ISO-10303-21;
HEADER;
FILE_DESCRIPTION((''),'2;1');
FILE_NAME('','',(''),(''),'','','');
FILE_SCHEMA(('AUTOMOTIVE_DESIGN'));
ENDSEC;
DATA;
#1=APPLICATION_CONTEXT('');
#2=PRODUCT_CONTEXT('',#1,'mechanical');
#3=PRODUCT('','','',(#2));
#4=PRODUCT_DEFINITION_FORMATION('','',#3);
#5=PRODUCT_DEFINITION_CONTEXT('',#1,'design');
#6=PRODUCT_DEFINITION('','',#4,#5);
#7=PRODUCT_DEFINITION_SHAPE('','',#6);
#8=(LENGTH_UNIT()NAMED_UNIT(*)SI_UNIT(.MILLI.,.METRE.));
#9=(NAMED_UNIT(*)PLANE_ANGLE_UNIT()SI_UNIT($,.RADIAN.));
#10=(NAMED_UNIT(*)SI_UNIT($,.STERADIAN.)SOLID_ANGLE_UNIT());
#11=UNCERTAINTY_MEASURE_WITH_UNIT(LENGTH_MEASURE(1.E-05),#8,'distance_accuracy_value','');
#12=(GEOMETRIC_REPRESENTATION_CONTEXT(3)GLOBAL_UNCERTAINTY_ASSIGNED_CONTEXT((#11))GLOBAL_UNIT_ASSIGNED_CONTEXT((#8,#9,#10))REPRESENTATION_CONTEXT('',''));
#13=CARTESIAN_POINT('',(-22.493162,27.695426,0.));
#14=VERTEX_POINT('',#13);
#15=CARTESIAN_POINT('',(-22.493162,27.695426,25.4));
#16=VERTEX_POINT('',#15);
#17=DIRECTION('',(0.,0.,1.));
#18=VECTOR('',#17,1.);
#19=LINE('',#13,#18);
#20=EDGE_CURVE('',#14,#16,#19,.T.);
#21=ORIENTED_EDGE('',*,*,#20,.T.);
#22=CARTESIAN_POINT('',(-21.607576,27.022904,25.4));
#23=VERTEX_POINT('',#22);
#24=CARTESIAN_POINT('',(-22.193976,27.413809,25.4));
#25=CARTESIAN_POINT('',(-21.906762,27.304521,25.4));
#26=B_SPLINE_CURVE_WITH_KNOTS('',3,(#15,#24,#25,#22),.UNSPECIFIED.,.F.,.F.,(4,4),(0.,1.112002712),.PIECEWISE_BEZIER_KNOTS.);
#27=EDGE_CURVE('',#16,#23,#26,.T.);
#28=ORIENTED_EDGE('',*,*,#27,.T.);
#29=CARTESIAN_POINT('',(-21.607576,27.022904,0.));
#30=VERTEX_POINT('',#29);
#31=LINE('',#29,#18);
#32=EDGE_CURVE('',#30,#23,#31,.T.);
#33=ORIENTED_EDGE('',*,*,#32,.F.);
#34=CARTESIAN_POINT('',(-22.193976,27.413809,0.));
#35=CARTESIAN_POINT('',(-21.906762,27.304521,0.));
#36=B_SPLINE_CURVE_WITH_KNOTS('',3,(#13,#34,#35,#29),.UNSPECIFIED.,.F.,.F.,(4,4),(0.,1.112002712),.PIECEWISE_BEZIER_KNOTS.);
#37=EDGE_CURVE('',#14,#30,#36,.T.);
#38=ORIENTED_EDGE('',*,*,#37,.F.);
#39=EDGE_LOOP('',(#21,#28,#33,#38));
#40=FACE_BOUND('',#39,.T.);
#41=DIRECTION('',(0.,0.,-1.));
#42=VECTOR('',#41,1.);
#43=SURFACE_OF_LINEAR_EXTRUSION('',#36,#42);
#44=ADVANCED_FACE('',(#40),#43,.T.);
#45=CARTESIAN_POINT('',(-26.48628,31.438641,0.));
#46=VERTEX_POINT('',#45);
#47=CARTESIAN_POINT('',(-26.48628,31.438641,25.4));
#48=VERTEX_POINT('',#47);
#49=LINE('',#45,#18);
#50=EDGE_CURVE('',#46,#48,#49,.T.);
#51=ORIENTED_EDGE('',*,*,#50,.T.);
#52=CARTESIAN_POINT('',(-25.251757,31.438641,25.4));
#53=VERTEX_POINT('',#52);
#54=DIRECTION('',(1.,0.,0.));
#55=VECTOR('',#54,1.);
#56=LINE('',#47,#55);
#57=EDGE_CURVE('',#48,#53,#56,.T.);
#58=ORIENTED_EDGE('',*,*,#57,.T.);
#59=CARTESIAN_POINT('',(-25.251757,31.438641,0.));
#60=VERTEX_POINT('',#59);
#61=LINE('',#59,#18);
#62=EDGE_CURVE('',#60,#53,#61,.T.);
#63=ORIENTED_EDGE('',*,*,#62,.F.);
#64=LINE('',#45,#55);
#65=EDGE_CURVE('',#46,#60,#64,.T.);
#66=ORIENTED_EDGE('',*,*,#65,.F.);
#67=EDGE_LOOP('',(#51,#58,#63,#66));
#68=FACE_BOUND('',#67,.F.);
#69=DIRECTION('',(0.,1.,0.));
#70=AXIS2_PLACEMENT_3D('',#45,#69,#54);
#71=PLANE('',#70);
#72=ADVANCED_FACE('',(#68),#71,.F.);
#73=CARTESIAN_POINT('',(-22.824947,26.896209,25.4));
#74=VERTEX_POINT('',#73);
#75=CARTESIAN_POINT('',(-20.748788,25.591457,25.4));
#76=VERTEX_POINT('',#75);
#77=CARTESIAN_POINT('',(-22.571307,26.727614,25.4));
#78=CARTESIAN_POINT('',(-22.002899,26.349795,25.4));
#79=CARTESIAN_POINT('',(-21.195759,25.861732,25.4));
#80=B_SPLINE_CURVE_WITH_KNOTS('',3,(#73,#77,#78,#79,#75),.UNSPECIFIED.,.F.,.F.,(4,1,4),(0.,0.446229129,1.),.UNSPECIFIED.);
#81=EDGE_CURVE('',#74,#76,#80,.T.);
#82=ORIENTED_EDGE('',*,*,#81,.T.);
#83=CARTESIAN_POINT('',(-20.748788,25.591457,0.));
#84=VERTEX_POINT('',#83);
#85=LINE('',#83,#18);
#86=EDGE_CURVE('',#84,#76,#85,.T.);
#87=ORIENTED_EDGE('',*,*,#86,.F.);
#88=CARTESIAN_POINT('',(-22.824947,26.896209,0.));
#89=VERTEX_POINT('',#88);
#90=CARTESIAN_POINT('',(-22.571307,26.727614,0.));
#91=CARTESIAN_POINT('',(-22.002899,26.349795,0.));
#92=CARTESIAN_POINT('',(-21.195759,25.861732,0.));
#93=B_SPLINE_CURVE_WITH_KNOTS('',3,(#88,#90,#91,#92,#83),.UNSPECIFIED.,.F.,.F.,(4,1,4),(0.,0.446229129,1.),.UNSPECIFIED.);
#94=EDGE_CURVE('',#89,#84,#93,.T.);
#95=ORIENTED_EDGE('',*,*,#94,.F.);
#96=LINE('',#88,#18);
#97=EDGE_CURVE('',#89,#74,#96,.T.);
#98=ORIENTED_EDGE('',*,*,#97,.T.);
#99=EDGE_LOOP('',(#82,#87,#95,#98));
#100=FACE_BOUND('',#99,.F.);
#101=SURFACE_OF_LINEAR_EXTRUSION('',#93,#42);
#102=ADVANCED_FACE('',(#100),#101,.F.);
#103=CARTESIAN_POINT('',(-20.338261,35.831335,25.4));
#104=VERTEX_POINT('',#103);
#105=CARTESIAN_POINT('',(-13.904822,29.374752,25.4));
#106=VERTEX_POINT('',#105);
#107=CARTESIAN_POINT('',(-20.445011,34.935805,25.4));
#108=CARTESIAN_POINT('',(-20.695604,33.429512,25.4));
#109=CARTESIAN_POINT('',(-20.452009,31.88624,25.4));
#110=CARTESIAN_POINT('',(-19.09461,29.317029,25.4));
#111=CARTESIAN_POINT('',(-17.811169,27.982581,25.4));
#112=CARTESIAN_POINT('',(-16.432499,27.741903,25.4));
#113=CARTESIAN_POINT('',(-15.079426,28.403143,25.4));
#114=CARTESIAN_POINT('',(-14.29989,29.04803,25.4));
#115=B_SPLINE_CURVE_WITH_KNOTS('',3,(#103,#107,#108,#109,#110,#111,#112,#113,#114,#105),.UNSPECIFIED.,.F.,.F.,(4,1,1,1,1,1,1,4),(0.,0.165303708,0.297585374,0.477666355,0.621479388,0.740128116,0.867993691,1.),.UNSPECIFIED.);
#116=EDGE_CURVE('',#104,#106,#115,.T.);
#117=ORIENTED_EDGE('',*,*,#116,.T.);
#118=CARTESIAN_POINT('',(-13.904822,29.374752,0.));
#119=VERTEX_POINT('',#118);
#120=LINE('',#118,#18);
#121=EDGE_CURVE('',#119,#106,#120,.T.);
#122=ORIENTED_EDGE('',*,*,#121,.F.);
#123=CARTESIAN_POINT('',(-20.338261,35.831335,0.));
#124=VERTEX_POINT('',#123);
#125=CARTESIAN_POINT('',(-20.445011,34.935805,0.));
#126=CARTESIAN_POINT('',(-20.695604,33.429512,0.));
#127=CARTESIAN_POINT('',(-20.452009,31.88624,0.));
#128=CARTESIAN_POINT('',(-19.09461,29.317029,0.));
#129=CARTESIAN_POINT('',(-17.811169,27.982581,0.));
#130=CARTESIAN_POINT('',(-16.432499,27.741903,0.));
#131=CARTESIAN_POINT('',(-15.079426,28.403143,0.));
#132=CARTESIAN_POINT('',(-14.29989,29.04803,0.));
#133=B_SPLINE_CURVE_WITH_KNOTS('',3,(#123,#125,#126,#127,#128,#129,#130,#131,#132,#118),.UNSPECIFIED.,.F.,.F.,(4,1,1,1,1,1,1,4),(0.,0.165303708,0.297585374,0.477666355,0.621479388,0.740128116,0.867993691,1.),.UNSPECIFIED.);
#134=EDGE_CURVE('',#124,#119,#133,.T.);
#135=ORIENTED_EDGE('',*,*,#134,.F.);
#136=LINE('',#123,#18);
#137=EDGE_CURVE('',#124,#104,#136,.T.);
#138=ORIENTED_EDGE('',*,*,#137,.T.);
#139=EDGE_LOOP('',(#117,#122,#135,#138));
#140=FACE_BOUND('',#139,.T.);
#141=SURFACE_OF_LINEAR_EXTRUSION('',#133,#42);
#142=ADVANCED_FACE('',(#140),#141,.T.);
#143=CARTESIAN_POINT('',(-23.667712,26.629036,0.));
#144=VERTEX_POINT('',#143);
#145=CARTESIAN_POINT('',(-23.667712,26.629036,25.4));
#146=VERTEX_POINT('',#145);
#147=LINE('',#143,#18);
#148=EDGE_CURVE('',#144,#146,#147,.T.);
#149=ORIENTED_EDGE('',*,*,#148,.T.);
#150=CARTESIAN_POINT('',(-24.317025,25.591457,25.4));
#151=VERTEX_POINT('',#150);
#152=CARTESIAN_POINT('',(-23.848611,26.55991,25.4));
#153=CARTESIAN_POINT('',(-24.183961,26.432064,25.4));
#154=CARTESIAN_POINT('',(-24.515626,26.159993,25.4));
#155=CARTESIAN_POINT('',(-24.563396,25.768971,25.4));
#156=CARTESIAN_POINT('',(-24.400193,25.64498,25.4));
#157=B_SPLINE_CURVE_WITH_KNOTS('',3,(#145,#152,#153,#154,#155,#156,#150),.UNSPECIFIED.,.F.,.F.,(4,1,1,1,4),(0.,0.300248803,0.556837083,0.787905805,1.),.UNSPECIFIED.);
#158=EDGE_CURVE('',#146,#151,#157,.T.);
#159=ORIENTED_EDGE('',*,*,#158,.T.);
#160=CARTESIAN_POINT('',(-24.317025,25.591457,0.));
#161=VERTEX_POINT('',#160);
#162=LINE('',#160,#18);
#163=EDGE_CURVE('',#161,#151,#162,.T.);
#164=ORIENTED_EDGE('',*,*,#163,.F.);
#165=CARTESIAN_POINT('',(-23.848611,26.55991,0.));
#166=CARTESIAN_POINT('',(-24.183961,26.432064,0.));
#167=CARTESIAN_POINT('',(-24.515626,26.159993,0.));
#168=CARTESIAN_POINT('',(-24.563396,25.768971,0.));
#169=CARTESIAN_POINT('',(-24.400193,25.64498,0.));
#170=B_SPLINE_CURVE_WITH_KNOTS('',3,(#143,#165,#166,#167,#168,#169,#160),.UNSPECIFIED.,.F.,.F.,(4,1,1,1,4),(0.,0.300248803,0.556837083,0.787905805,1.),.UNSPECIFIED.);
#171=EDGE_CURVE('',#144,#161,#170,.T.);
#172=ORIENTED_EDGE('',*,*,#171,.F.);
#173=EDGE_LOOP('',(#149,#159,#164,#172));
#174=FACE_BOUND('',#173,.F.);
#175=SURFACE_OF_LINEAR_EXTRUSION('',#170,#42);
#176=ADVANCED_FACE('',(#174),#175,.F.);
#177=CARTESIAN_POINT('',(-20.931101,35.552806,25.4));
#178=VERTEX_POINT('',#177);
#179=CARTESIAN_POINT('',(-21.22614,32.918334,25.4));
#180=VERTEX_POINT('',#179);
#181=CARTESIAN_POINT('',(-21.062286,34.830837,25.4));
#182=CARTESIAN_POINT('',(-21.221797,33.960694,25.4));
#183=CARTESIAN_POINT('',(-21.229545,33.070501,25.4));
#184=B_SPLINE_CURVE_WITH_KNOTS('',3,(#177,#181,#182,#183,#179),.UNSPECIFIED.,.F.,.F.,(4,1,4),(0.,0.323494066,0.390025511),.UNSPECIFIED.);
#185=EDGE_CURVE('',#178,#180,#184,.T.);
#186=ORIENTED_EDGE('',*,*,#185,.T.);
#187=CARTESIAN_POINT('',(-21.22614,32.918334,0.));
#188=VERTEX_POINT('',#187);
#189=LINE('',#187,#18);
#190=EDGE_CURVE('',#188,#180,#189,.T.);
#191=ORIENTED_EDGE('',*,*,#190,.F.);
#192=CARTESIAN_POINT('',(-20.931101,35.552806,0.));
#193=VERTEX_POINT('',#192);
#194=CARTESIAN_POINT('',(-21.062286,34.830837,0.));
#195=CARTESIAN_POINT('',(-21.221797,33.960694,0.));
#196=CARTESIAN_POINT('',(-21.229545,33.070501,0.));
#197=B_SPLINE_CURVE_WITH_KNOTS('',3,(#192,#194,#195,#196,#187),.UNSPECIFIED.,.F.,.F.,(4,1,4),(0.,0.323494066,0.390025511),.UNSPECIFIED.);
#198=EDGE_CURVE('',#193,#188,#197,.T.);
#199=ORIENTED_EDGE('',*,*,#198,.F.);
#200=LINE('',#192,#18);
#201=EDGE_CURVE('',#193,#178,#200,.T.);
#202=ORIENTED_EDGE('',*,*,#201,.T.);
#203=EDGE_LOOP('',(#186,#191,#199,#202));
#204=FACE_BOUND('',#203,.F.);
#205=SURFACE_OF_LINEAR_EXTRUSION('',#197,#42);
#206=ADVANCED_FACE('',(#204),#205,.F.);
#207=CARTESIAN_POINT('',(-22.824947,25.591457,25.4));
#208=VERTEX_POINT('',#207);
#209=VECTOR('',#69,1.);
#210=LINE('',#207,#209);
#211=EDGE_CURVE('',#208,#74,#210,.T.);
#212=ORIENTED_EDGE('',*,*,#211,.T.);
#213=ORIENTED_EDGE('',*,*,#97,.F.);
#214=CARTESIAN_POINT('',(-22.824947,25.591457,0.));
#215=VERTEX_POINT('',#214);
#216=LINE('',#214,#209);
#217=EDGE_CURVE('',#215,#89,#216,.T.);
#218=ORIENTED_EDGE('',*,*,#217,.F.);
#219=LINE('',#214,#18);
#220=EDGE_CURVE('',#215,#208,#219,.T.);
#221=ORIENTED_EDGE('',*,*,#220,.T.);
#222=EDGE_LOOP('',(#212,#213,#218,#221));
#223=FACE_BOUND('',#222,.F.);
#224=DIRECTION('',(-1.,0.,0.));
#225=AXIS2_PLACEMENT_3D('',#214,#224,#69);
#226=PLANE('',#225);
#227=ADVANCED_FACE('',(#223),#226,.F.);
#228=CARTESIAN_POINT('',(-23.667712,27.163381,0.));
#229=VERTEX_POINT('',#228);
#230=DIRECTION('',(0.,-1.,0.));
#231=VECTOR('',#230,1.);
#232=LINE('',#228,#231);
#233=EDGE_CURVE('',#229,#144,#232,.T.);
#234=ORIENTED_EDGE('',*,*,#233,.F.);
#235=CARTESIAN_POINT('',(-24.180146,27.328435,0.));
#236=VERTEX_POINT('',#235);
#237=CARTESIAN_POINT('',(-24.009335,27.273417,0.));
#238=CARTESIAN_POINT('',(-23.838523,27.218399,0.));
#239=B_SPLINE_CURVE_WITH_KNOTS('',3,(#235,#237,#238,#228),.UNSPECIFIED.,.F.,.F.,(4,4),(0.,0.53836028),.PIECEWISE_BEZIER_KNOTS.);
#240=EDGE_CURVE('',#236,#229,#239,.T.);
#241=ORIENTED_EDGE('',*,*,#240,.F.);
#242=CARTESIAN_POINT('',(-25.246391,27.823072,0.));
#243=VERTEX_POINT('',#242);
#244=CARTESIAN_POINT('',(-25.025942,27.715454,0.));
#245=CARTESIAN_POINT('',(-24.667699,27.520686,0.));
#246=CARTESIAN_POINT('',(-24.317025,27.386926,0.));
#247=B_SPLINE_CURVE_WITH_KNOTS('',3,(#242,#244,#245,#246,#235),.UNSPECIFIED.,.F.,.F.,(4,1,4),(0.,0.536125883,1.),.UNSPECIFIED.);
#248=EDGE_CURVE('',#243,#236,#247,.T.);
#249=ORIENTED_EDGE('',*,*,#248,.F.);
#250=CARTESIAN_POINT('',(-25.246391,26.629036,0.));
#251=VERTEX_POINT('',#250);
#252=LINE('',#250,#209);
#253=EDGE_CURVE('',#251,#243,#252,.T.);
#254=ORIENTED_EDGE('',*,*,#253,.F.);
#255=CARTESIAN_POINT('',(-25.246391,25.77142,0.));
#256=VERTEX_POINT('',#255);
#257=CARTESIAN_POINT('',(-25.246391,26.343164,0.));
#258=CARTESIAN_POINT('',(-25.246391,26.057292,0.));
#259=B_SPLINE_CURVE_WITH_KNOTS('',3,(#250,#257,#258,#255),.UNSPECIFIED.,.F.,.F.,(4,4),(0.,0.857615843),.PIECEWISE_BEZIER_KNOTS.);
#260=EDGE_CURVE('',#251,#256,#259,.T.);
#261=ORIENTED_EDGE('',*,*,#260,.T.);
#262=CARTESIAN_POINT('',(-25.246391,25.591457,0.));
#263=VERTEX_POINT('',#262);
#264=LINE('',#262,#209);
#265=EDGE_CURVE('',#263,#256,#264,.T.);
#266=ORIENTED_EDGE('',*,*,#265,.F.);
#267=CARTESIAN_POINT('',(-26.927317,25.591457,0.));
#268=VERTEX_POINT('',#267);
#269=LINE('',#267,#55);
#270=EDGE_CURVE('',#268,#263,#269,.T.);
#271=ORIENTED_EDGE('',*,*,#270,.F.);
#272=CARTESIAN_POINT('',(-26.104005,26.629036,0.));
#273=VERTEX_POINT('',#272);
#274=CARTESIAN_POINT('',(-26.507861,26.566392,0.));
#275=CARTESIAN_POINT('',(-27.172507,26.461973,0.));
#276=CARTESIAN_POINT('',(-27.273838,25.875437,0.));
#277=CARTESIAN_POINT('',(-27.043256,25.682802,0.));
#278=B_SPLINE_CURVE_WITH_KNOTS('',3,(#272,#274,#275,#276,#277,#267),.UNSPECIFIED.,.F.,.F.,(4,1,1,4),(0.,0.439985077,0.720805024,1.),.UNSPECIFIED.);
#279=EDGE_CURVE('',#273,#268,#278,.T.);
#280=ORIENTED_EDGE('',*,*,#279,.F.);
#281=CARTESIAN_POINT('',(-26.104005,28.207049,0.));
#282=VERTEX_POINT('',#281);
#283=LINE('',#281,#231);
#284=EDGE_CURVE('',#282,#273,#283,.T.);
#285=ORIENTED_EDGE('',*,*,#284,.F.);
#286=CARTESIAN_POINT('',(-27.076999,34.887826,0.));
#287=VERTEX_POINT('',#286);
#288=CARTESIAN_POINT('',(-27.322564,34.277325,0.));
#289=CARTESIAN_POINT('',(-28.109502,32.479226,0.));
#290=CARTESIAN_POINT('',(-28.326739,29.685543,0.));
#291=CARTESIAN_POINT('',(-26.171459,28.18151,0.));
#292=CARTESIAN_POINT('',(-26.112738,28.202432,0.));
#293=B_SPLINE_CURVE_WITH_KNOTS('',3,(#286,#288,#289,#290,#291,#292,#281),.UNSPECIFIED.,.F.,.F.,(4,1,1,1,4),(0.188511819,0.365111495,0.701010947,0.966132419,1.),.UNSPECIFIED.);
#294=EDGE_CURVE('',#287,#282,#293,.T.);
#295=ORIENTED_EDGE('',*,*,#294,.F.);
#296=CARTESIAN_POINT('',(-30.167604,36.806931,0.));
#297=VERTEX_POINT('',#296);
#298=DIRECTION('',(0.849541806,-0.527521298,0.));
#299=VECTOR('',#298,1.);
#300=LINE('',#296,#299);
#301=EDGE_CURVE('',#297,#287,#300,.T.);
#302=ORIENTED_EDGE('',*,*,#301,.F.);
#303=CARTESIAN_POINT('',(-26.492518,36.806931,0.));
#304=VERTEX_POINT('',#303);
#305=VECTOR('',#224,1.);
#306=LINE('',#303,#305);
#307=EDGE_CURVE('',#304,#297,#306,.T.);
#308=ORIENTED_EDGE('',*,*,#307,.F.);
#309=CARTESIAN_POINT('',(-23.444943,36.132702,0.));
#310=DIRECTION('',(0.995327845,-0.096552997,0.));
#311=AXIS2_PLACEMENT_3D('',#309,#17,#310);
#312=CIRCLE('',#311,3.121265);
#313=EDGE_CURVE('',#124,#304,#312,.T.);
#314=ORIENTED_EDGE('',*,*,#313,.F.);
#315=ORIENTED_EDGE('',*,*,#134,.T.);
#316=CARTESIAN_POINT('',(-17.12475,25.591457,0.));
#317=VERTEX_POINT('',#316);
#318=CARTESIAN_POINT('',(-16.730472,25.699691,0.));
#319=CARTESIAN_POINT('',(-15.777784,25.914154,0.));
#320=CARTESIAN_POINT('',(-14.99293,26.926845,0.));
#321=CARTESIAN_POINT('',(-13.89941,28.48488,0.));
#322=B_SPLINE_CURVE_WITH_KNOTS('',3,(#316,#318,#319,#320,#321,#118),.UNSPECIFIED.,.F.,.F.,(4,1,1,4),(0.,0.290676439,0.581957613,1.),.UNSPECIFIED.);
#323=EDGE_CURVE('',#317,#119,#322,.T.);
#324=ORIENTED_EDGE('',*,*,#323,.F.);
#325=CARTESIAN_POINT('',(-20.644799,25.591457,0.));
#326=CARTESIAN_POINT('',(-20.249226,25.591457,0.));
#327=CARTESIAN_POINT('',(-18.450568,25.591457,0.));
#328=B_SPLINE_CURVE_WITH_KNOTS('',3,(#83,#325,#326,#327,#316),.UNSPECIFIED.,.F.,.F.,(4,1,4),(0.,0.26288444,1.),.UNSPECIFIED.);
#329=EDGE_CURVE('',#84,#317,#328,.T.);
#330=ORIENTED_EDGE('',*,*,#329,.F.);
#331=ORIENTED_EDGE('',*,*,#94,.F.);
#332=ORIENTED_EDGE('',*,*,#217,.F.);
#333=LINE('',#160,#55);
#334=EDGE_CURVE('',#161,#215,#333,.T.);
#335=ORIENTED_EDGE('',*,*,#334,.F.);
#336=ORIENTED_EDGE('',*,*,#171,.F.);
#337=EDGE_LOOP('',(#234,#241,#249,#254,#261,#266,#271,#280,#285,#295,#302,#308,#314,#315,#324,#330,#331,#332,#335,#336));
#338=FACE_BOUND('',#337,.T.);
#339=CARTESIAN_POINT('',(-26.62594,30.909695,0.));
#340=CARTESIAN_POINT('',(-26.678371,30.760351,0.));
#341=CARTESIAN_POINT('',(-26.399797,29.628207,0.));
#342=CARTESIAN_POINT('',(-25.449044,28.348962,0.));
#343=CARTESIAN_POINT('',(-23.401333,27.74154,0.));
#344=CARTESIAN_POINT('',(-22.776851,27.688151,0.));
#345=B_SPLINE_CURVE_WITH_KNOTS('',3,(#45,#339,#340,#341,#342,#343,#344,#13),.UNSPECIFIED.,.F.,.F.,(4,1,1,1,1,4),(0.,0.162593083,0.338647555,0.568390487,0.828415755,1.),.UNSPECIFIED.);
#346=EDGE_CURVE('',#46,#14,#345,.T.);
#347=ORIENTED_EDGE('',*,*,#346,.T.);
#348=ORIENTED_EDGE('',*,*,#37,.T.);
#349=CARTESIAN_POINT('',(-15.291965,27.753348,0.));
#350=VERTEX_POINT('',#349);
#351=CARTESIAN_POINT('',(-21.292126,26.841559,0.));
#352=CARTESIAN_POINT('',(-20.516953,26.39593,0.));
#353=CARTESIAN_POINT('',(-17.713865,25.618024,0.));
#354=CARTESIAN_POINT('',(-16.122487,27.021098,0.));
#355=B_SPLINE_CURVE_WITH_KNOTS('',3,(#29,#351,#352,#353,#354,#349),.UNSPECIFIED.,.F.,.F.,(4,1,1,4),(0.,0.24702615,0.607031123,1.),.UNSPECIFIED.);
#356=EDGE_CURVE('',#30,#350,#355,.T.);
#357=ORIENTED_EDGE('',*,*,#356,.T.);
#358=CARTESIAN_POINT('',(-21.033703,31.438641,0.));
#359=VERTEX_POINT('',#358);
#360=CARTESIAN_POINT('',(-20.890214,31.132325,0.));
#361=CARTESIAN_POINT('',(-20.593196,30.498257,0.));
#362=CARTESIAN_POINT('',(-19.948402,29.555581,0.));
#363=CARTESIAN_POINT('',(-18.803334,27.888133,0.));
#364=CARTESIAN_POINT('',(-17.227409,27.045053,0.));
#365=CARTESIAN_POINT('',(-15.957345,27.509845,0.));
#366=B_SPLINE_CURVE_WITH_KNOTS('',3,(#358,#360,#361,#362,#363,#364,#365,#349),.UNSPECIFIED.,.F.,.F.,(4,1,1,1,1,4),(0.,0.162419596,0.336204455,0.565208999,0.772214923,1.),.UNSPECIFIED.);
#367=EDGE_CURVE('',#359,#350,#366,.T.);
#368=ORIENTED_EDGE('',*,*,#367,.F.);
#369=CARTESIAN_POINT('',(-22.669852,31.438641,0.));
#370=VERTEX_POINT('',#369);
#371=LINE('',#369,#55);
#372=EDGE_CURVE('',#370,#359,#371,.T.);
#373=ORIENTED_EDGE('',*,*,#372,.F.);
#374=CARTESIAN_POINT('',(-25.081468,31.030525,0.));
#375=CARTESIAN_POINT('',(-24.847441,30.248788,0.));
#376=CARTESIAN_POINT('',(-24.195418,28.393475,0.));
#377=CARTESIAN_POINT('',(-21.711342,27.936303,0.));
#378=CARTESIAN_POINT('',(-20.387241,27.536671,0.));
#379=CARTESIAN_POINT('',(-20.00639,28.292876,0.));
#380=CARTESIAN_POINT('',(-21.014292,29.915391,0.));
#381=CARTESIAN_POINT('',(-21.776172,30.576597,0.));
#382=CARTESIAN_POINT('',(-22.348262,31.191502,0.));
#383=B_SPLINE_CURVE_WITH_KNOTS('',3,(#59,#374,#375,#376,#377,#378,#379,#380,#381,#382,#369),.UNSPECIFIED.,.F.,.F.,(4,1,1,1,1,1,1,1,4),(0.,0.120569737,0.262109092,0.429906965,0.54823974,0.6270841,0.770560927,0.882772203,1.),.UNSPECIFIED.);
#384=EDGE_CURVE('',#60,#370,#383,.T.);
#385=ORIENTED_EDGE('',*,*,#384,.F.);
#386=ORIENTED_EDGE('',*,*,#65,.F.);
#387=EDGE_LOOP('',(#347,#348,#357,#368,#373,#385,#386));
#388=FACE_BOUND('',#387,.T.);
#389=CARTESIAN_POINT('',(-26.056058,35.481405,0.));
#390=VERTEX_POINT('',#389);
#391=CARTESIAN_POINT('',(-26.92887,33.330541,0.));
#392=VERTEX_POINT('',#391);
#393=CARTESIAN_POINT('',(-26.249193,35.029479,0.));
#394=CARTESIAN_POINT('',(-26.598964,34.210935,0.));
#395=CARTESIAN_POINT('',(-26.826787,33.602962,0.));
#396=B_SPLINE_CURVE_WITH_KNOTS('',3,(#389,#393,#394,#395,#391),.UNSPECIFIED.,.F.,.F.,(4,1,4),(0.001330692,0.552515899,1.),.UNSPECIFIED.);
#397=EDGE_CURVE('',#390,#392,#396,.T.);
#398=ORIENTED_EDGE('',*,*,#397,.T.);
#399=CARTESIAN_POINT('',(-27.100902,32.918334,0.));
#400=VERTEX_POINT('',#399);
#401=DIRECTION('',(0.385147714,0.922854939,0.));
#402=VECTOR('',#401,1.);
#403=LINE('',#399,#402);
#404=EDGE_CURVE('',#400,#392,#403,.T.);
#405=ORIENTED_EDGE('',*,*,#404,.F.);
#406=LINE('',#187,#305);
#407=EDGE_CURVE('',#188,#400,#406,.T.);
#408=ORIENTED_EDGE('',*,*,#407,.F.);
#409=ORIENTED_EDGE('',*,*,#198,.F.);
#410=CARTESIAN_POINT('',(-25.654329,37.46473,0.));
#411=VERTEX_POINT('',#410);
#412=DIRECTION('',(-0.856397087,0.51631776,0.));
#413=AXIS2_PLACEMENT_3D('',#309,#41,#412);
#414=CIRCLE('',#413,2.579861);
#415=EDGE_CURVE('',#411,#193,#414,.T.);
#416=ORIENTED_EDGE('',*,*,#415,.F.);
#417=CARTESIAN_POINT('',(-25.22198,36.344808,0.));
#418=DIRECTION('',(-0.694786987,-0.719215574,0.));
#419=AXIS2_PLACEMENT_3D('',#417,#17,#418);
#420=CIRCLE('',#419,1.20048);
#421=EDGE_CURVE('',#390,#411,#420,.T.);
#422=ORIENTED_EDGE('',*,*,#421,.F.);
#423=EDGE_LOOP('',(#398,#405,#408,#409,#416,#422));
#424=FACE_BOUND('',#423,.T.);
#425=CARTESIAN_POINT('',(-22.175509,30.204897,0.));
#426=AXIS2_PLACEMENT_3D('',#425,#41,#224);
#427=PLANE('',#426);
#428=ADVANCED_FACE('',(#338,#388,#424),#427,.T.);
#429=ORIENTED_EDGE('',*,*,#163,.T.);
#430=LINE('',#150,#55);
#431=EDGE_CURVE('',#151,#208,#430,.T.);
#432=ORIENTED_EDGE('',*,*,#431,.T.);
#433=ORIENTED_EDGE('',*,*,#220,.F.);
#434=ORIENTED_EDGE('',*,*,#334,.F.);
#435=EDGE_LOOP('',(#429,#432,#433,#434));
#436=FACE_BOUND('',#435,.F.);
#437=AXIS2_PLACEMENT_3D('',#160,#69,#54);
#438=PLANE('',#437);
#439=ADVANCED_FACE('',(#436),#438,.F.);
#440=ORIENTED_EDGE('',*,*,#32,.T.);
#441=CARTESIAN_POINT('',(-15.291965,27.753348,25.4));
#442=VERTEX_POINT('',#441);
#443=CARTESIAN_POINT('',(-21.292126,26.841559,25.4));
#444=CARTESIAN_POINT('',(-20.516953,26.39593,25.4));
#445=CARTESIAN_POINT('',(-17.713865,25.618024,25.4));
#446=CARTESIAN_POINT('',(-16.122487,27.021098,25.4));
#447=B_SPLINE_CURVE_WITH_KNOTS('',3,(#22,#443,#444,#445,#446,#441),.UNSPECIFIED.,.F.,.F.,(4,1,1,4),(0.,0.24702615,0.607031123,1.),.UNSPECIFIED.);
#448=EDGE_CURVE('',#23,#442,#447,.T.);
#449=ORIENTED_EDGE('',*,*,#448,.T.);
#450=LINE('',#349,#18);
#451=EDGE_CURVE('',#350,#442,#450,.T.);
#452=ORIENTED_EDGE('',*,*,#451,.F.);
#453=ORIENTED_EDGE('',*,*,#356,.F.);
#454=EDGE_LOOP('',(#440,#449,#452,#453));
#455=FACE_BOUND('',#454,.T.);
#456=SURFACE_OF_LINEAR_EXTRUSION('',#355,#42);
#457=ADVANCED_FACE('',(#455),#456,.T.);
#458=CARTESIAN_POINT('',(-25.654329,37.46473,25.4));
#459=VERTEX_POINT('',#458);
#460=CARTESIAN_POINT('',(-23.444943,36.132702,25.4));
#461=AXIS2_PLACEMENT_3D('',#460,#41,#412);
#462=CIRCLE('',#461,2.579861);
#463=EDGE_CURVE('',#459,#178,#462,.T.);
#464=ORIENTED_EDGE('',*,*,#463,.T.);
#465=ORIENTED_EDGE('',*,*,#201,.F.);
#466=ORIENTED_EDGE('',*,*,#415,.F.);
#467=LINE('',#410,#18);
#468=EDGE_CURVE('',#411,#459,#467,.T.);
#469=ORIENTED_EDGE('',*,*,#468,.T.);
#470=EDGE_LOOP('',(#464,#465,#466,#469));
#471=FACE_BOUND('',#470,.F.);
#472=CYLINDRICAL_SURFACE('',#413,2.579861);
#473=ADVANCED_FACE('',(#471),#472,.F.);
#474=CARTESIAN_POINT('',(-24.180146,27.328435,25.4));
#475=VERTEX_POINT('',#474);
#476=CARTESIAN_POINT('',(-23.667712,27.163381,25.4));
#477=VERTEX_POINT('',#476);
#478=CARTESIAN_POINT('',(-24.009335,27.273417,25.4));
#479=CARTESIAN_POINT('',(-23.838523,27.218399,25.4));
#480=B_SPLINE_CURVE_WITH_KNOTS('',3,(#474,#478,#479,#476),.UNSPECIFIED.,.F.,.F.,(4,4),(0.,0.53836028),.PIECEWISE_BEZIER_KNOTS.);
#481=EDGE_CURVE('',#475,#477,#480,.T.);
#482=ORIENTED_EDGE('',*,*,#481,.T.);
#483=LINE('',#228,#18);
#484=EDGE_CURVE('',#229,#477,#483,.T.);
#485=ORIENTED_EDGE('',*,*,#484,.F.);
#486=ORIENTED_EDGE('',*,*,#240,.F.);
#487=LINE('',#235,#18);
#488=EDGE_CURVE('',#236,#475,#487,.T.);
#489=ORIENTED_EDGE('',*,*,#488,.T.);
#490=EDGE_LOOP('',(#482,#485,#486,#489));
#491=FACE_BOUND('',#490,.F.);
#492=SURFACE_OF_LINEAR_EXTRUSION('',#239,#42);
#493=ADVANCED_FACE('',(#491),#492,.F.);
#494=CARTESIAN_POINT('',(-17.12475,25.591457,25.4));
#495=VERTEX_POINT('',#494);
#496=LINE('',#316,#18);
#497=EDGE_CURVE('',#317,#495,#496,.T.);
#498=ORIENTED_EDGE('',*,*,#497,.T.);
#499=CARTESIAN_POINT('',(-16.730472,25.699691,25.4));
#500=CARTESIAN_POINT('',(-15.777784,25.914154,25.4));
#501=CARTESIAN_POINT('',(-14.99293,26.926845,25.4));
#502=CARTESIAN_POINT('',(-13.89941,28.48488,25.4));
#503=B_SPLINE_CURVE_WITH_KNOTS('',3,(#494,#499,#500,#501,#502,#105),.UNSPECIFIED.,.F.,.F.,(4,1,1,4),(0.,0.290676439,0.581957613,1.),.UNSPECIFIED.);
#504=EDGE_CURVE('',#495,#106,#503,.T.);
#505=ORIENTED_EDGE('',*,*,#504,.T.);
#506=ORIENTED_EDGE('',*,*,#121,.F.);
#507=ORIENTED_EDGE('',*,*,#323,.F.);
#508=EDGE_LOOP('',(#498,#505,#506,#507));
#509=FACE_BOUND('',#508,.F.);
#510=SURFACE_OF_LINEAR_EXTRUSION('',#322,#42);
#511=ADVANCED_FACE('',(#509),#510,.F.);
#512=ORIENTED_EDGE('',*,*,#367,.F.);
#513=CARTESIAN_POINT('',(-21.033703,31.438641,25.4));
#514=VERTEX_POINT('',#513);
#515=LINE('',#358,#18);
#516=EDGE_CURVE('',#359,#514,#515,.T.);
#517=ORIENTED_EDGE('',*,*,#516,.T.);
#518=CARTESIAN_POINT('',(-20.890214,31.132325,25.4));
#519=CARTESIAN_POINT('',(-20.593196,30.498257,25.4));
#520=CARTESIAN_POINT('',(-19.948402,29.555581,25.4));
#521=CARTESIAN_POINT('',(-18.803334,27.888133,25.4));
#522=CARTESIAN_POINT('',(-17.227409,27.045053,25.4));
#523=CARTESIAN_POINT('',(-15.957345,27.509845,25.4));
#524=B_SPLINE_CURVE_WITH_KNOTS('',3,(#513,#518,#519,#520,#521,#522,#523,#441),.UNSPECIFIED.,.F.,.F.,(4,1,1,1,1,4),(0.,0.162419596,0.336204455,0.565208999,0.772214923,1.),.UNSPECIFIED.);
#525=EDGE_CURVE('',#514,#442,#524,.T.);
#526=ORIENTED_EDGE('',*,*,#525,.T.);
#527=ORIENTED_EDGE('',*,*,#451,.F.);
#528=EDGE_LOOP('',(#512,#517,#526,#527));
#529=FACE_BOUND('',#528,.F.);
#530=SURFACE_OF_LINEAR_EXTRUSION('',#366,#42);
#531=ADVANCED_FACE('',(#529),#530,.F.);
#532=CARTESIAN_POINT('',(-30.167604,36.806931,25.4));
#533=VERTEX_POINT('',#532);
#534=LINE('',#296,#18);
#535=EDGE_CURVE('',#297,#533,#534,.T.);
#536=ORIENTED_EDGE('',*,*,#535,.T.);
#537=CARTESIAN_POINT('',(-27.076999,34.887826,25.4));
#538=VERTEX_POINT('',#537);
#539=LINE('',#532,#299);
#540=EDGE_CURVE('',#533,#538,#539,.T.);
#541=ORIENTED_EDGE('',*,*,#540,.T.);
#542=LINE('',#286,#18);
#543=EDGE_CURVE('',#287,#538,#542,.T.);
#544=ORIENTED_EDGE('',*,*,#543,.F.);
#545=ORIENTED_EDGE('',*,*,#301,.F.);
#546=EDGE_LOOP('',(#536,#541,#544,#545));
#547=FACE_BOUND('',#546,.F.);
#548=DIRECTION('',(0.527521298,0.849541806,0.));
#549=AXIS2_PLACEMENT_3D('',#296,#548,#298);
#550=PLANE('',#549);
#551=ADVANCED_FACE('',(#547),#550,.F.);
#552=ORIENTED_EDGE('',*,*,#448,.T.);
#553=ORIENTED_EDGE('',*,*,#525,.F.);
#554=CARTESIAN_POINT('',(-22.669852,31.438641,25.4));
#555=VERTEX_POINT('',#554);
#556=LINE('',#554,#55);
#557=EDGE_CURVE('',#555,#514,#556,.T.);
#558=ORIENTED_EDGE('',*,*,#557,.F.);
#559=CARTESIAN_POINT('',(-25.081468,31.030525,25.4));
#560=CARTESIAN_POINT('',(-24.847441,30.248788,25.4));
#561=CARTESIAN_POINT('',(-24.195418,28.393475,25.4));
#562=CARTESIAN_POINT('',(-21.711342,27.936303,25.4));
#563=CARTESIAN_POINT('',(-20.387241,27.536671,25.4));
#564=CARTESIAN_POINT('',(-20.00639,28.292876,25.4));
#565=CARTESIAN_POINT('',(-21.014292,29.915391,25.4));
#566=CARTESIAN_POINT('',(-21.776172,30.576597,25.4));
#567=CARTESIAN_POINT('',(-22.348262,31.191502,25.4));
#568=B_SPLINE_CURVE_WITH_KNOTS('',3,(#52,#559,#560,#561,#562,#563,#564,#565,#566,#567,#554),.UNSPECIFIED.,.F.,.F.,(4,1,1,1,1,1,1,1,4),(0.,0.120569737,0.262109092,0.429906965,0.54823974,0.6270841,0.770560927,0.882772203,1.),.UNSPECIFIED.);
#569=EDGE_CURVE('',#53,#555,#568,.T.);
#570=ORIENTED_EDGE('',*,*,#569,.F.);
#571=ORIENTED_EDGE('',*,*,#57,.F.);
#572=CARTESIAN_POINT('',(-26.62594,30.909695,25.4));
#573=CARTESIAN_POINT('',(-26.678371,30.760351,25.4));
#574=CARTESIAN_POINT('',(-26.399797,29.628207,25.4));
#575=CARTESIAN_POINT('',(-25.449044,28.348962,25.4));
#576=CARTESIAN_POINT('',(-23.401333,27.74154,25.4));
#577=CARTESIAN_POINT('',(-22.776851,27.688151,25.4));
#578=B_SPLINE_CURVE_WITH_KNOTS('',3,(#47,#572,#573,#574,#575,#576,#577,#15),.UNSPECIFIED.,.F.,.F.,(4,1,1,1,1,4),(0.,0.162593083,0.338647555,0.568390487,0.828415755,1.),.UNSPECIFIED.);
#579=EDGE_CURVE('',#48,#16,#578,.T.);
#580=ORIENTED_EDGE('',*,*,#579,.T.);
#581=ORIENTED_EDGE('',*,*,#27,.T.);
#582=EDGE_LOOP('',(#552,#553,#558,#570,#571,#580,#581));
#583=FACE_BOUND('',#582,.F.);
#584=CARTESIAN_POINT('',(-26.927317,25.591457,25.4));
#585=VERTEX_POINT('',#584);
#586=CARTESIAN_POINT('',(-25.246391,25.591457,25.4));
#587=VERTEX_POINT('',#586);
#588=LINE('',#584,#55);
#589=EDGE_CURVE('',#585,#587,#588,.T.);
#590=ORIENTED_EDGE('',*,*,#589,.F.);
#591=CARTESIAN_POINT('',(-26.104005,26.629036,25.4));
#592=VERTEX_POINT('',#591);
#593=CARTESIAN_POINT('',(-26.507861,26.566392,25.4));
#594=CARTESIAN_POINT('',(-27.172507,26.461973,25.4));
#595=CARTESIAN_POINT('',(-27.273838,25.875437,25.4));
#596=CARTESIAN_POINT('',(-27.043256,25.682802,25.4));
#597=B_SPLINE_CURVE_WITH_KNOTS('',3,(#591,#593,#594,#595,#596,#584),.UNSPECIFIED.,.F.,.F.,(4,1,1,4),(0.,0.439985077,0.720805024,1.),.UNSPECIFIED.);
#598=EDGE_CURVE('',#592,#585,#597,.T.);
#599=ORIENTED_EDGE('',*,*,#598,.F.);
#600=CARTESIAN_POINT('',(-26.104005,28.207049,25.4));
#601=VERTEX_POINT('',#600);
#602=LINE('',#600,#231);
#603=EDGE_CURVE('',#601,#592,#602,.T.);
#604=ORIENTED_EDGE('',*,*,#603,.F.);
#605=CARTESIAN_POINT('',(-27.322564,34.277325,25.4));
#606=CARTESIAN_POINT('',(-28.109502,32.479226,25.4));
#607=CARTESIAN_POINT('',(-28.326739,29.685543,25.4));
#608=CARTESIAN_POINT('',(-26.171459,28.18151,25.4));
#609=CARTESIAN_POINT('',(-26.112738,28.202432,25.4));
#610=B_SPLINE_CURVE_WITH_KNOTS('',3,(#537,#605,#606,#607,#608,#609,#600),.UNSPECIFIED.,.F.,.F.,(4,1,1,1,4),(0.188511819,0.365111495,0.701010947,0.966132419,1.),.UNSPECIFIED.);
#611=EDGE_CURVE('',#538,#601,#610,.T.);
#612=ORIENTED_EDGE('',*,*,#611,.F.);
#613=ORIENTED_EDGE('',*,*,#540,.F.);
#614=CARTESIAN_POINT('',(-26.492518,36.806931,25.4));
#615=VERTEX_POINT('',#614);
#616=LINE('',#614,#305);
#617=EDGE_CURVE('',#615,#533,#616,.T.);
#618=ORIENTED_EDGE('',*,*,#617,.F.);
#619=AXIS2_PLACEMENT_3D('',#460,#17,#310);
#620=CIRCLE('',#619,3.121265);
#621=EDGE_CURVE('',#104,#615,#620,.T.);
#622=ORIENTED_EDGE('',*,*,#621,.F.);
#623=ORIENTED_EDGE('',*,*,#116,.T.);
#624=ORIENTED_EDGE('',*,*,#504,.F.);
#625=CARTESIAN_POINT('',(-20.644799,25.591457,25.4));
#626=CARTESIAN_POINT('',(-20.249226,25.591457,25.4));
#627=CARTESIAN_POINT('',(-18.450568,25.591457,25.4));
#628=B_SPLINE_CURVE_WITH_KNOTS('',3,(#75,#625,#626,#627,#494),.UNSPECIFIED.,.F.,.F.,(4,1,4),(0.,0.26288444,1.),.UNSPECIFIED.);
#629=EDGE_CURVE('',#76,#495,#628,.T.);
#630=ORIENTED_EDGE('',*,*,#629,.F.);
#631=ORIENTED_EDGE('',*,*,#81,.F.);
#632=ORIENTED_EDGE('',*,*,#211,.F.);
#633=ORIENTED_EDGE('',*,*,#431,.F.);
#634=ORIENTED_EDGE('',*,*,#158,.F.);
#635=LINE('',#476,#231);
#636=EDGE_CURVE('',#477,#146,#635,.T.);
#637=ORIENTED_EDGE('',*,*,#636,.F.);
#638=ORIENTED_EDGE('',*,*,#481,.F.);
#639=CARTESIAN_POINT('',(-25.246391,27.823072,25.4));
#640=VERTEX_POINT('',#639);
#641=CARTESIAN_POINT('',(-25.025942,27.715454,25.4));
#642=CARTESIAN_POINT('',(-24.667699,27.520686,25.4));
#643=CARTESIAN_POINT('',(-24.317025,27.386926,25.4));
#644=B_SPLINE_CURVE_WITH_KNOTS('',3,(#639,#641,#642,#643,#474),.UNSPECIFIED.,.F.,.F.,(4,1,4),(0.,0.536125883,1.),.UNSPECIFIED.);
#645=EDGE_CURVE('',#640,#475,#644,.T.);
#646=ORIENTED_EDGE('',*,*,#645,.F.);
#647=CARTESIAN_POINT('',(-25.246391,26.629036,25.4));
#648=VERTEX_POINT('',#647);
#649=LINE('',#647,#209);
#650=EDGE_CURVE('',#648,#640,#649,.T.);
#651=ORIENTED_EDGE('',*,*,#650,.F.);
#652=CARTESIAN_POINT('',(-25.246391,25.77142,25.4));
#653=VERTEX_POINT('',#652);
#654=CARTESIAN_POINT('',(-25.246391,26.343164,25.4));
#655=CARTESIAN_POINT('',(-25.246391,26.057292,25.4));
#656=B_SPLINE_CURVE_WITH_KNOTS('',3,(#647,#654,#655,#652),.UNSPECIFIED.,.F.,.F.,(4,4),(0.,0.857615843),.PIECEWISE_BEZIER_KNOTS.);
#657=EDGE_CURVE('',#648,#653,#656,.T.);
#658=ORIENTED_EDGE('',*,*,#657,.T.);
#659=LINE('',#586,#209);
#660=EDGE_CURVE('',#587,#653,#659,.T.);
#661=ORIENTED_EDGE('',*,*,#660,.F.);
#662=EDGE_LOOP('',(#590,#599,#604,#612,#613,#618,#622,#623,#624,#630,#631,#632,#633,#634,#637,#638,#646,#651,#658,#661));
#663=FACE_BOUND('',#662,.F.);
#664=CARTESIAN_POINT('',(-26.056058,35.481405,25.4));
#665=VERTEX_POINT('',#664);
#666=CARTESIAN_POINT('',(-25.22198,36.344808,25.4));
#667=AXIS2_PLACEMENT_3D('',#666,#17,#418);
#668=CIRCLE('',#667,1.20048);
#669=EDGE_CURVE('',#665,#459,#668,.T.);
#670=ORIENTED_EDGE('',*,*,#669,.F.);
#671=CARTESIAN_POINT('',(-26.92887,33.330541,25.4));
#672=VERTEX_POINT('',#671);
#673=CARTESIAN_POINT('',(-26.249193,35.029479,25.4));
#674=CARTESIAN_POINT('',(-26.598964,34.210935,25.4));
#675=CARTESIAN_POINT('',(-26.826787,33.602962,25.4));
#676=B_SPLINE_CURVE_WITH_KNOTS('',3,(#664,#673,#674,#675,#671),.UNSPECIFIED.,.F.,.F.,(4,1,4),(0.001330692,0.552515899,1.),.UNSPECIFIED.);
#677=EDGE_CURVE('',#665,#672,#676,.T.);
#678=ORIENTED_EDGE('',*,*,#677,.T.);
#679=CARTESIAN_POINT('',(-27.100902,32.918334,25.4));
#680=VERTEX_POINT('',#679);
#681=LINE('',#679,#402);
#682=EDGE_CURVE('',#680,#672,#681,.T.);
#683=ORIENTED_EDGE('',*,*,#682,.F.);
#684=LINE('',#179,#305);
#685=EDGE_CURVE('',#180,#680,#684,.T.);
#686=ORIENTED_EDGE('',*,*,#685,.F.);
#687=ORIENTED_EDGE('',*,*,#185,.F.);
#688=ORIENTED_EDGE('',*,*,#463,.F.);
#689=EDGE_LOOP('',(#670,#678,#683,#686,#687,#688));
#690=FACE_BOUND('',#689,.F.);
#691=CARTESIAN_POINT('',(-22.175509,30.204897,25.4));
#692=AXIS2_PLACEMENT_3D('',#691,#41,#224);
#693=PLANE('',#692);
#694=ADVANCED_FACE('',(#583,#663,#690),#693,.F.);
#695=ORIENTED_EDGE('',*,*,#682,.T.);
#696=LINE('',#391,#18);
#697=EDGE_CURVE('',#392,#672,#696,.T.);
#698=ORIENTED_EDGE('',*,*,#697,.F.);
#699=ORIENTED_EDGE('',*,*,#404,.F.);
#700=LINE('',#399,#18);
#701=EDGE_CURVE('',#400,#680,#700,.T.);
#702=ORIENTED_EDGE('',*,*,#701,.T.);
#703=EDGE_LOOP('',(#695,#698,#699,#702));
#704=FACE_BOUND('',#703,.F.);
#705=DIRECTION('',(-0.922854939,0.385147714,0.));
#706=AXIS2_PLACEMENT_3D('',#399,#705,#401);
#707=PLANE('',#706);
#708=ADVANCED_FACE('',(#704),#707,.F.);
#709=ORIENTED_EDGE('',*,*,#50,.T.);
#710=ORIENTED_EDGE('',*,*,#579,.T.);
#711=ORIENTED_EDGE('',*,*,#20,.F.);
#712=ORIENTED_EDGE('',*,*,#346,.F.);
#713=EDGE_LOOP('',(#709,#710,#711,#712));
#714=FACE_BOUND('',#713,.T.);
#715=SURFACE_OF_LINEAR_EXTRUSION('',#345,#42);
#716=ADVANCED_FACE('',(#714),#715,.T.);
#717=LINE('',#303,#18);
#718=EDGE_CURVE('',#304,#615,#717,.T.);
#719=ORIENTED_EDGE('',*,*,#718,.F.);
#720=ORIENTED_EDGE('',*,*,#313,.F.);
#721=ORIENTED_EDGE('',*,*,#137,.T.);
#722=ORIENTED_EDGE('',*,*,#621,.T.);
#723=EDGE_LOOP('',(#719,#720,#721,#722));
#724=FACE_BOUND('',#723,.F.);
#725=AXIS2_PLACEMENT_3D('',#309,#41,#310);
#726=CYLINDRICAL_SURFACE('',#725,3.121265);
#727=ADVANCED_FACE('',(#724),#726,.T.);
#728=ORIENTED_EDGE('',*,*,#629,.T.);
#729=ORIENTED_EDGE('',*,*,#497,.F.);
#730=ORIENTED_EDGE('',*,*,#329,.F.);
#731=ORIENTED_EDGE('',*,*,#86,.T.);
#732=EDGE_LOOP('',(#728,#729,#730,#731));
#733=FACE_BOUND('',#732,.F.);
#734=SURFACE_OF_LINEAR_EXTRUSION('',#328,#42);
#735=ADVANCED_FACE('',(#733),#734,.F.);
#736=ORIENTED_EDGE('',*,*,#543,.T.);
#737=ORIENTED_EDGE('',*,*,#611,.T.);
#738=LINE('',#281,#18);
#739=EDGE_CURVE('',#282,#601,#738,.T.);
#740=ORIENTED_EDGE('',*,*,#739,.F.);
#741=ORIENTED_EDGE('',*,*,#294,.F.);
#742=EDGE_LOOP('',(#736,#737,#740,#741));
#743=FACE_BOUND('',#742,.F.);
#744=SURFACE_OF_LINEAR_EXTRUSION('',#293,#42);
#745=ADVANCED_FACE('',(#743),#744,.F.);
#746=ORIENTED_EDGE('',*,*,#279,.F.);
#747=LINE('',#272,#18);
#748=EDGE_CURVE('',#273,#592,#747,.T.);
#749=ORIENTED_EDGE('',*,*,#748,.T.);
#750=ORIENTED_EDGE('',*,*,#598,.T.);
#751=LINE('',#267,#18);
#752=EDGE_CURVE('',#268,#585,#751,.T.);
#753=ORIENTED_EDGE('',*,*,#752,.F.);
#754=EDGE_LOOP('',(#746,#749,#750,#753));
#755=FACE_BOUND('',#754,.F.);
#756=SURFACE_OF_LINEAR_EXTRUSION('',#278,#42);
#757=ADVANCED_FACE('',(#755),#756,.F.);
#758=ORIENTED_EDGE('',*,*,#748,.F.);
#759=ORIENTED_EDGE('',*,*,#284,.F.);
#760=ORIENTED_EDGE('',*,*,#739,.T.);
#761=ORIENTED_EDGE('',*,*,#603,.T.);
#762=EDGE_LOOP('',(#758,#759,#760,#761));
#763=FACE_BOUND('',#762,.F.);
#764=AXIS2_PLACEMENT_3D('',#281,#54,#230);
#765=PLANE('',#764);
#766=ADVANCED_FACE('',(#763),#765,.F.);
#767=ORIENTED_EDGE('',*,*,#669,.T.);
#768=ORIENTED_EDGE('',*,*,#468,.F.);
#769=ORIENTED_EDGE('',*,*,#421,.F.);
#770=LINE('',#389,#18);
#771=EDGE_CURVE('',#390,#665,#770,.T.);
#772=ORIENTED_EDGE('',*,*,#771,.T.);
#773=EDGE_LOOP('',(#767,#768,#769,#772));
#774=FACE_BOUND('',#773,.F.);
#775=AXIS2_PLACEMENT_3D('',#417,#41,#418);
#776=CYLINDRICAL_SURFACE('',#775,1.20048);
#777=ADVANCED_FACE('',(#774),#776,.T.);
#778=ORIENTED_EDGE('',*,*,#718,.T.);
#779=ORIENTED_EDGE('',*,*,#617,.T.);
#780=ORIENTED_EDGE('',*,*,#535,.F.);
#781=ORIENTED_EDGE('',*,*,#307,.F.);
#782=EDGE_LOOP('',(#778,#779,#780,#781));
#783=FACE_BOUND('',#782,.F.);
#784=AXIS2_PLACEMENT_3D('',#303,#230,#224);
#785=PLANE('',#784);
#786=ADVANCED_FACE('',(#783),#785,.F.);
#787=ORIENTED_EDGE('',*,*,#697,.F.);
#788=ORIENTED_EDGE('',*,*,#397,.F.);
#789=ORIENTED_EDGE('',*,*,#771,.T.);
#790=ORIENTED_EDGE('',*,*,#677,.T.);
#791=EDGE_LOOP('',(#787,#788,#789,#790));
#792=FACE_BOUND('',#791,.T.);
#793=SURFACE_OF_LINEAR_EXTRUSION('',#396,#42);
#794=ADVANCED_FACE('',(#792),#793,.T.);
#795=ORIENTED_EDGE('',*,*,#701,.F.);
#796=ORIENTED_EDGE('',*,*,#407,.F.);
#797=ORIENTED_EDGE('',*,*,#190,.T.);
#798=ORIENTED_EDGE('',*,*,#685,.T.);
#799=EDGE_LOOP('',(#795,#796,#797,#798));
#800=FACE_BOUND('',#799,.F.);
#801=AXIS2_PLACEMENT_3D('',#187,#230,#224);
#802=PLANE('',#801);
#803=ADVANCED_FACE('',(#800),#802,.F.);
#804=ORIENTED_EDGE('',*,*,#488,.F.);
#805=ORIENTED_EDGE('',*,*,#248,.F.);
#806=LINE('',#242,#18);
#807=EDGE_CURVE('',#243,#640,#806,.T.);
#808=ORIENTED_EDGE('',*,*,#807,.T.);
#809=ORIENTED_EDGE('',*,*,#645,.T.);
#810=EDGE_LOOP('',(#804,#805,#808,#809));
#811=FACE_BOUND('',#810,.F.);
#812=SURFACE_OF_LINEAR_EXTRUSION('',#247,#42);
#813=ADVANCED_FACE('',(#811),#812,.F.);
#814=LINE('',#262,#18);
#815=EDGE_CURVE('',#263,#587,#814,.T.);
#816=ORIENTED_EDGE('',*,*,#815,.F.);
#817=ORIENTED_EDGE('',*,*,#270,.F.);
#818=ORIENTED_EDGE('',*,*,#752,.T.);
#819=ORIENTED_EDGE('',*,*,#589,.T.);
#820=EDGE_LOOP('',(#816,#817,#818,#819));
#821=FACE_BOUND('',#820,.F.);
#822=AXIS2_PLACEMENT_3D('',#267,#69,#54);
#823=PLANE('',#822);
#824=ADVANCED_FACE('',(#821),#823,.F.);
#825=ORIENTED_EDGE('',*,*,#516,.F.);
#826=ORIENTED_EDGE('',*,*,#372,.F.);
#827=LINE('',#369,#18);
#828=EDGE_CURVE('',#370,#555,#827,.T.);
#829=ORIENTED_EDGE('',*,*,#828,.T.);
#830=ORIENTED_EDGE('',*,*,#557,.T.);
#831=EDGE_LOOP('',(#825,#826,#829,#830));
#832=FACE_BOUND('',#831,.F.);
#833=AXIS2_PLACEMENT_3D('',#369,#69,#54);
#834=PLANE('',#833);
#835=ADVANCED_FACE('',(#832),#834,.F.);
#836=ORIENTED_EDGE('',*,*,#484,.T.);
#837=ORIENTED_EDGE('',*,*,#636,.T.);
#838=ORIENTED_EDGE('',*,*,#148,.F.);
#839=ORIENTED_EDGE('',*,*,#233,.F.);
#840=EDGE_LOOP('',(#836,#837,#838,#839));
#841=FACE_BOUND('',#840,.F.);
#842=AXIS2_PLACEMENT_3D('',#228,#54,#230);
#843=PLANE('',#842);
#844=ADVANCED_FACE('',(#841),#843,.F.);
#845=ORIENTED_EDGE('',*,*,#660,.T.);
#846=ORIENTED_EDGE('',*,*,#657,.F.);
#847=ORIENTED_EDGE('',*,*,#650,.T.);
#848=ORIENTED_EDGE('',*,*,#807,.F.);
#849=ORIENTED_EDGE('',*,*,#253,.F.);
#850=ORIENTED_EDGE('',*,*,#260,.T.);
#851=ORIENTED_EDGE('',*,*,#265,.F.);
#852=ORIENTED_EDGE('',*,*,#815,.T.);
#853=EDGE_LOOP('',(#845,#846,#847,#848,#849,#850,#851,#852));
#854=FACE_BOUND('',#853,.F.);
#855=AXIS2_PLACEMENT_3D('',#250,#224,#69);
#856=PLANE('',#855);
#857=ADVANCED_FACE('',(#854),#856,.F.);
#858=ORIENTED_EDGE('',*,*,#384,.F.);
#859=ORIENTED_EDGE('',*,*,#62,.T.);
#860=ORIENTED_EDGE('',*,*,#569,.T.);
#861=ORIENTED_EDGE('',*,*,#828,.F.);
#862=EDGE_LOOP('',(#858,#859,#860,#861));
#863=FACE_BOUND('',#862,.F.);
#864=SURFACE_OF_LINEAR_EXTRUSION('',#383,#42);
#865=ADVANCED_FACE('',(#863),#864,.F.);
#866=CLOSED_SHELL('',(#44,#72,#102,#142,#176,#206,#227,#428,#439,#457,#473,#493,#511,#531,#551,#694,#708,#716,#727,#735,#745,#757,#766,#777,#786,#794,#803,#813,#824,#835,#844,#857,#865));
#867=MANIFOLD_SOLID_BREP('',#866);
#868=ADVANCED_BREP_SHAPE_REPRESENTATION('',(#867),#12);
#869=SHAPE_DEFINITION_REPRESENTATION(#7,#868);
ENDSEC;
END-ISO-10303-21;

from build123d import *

# Parameters (mm, degrees)
F1_DEPTH = 25.4


with BuildPart() as f1:
    # F0 (on Top) → F1 (new body)
    with BuildSketch(Plane.XY):
        with BuildLine():
            add(Edge.make_bspline(
                [(-20.3382612037, 35.8313347316), (-20.4450111683, 34.9358050979), (-20.6956038594, 33.4295119082), (-20.4520091655, 31.8862395133), (-19.0946101464, 29.3170291608), (-17.8111689332, 27.9825807986), (-16.4324991862, 27.7419027231), (-15.0794261509, 28.4031430479), (-14.2998902994, 29.0480302806), (-13.904822059, 29.3747521937)],
                knots=[0, 0, 0, 0, 0.1653037084, 0.2975853738, 0.4776663545, 0.6214793879, 0.7401281155, 0.8679936909, 1, 1, 1, 1], degree=3))
            ThreePointArc((-20.3382612037, 35.8313347316), (-22.9562506508, 39.2154729726), (-26.4925179517, 36.8069310992))
            Line((-26.4925179517, 36.8069310992), (-26.5022447151, 36.8069310992))
            add(Edge.make_bspline(
                [(-26.5022447151, 36.8069310992), (-26.5819130783, 36.1808218197), (-26.8148696335, 35.5395069688), (-27.0769987784, 34.8878260057)],
                knots=[0, 0, 0, 0, 0.1885118186, 0.1885118186, 0.1885118186, 0.1885118186], degree=3))
            add(Edge.make_bspline(
                [(-27.0769987784, 34.8878260057), (-27.3225638709, 34.2773250402), (-28.1095019562, 32.4792264142), (-28.326739249, 29.6855427651), (-26.1714588887, 28.1815095827), (-26.1127384914, 28.2024321762), (-26.1040050536, 28.2070487738)],
                knots=[0.1885118186, 0.1885118186, 0.1885118186, 0.1885118186, 0.365111495, 0.7010109468, 0.966132419, 1, 1, 1, 1], degree=3))
            Line((-26.1040050536, 28.2070487738), (-26.1040050536, 26.6290362924))
            add(Edge.make_bspline(
                [(-26.1040050536, 26.6290362924), (-26.50786087, 26.5663915047), (-27.1725068155, 26.4619725648), (-27.2738381155, 25.8754369894), (-27.0432563694, 25.6828019605), (-26.9273165613, 25.5914572626)],
                knots=[0, 0, 0, 0, 0.4399850766, 0.7208050242, 1, 1, 1, 1], degree=3))
            Line((-26.9273165613, 25.5914572626), (-25.2463910729, 25.5914572626))
            Line((-25.2463910729, 25.5914572626), (-25.2463910729, 25.771420449))
            add(Edge.make_bspline(
                [(-25.2463910729, 26.6290362924), (-25.2463910729, 26.3431643446), (-25.2463910729, 26.0572923968), (-25.2463910729, 25.771420449)],
                knots=[0, 0, 0, 0, 0.8576158434, 0.8576158434, 0.8576158434, 0.8576158434], degree=3))
            Line((-25.2463910729, 26.6290362924), (-25.2463910729, 27.8230719268))
            add(Edge.make_bspline(
                [(-25.2463910729, 27.8230719268), (-25.0259420337, 27.7154537877), (-24.6676994209, 27.5206856825), (-24.3170251754, 27.3869259749), (-24.1801459342, 27.3284353316)],
                knots=[0, 0, 0, 0, 0.5361258831, 1, 1, 1, 1], degree=3))
            add(Edge.make_bspline(
                [(-24.1801459342, 27.3284353316), (-24.0093345443, 27.27341714), (-23.8385231545, 27.2183989485), (-23.6677117646, 27.163380757)],
                knots=[0, 0, 0, 0, 0.5383602798, 0.5383602798, 0.5383602798, 0.5383602798], degree=3))
            Line((-23.6677117646, 27.163380757), (-23.6677117646, 26.6290362924))
            add(Edge.make_bspline(
                [(-23.6677117646, 26.6290362924), (-23.8486112672, 26.5599101731), (-24.1839606126, 26.4320640725), (-24.5156260038, 26.159992966), (-24.5633962408, 25.7689710346), (-24.4001932512, 25.6449799988), (-24.3170251754, 25.5914572626)],
                knots=[0, 0, 0, 0, 0.3002488033, 0.5568370832, 0.7879058054, 1, 1, 1, 1], degree=3))
            Line((-24.3170251754, 25.5914572626), (-22.8249467909, 25.5914572626))
            Line((-22.8249467909, 25.5914572626), (-22.8249467909, 26.6290362924))
            Line((-22.8249467909, 26.6290362924), (-22.8249467909, 26.8962085247))
            add(Edge.make_bspline(
                [(-22.8249467909, 26.8962085247), (-22.5713066122, 26.7276144339), (-22.0028986749, 26.3497948791), (-21.195758956, 25.8617321727), (-20.7487884909, 25.5914572626)],
                knots=[0, 0, 0, 0, 0.446229129, 1, 1, 1, 1], degree=3))
            add(Edge.make_bspline(
                [(-20.7487884909, 25.5914572626), (-20.6447985865, 25.5914572626), (-20.2492258993, 25.5914572626), (-18.450568256, 25.5914572626), (-17.1247497201, 25.5914572626)],
                knots=[0, 0, 0, 0, 0.26288444, 1, 1, 1, 1], degree=3))
            add(Edge.make_bspline(
                [(-17.1247497201, 25.5914572626), (-16.7304722372, 25.6996906729), (-15.7777839891, 25.9141544333), (-14.9929303539, 26.9268449842), (-13.8994103483, 28.4848795653), (-13.904822059, 29.3747521937)],
                knots=[0, 0, 0, 0, 0.2906764391, 0.5819576128, 1, 1, 1, 1], degree=3))
        make_face()
        with BuildLine():
            Line((-22.6698517799, 31.4386411512), (-21.0337025163, 31.4386411512))
            add(Edge.make_bspline(
                [(-21.0337025163, 31.4386411512), (-20.8902139077, 31.1323245172), (-20.5931961172, 30.4982568329), (-19.948402137, 29.5555814465), (-18.8033343493, 27.8881326011), (-17.2274089816, 27.0450525014), (-15.957345343, 27.5098448702), (-15.2919646353, 27.753347531)],
                knots=[0, 0, 0, 0, 0.1624195956, 0.3362044547, 0.5652089994, 0.772214923, 1, 1, 1, 1], degree=3))
            add(Edge.make_bspline(
                [(-21.6075759381, 27.0229037851), (-21.2921258199, 26.8415588149), (-20.5169526668, 26.3959297147), (-17.7138645688, 25.6180239971), (-16.1224872042, 27.0210982904), (-15.2919646353, 27.753347531)],
                knots=[0, 0, 0, 0, 0.2470261496, 0.6070311225, 1, 1, 1, 1], degree=3))
            add(Edge.make_bspline(
                [(-22.4931623569, 27.695426443), (-22.1939764772, 27.4138094891), (-21.9067618178, 27.3045207391), (-21.6075759381, 27.0229037851)],
                knots=[0, 0, 0, 0, 1.1120027116, 1.1120027116, 1.1120027116, 1.1120027116], degree=3))
            add(Edge.make_bspline(
                [(-26.4862797308, 31.4386411512), (-26.6259402071, 30.9096946323), (-26.6783712453, 30.7603514323), (-26.3997968938, 29.6282073765), (-25.4490435424, 28.3489615598), (-23.4013330994, 27.741539672), (-22.7768510314, 27.6881511475), (-22.4931623569, 27.695426443)],
                knots=[0, 0, 0, 0, 0.1625930825, 0.3386475555, 0.5683904873, 0.8284157553, 1, 1, 1, 1], degree=3))
            Line((-26.4862797308, 31.4386411512), (-25.2517569845, 31.4386411512))
            add(Edge.make_bspline(
                [(-25.2517569845, 31.4386411512), (-25.081467778, 31.0305250114), (-24.8474412541, 30.2487875622), (-24.1954181543, 28.3934750124), (-21.7113422378, 27.9363030082), (-20.387241461, 27.5366712966), (-20.0063896806, 28.2928764563), (-21.0142921465, 29.9153907257), (-21.7761724236, 30.57659681), (-22.3482616293, 31.1915019356), (-22.6698517799, 31.4386411512)],
                knots=[0, 0, 0, 0, 0.1205697372, 0.2621090922, 0.4299069649, 0.5482397404, 0.6270841, 0.770560927, 0.8827722027, 1, 1, 1, 1], degree=3))
        make_face(mode=Mode.SUBTRACT)
        with BuildLine():
            ThreePointArc((-25.654328987, 37.4647304416), (-22.4769363023, 38.524071468), (-20.9311007312, 35.5528057326))
            add(Edge.make_bspline(
                [(-20.9311007312, 35.5528057326), (-21.0622856997, 34.8308373887), (-21.2217965052, 33.9606944337), (-21.2295446647, 33.070501474), (-21.2261399372, 32.9183340073)],
                knots=[0, 0, 0, 0, 0.3234940663, 0.3900255115, 0.3900255115, 0.3900255115, 0.3900255115], degree=3))
            Line((-21.2261399372, 32.9183340073), (-22.6698517799, 32.9183340073))
            Line((-22.6698517799, 32.9183340073), (-25.2517569845, 32.9183340073))
            Line((-25.2517569845, 32.9183340073), (-26.4331996441, 32.9183340073))
            Line((-26.4331996441, 32.9183340073), (-27.1009020507, 32.9183340073))
            Line((-27.1009020507, 32.9183340073), (-26.9288700074, 33.3305411041))
            add(Edge.make_bspline(
                [(-26.056057546, 35.4814045858), (-26.2491927806, 35.0294793202), (-26.5989642929, 34.2109348307), (-26.8267870878, 33.6029618535), (-26.9288700074, 33.3305411041)],
                knots=[0.0013306924, 0.0013306924, 0.0013306924, 0.0013306924, 0.5525158988, 1, 1, 1, 1], degree=3))
            ThreePointArc((-26.056057546, 35.4814045858), (-24.0453939283, 36.1064872676), (-25.654328987, 37.4647304416))
        make_face(mode=Mode.SUBTRACT)
        with BuildLine():
            add(Edge.make_bspline(
                [(-26.5022447151, 36.8069310992), (-26.5819130783, 36.1808218197), (-26.8148696335, 35.5395069688), (-27.0769987784, 34.8878260057)],
                knots=[0, 0, 0, 0, 0.1885118186, 0.1885118186, 0.1885118186, 0.1885118186], degree=3))
            Line((-26.5022447151, 36.8069310992), (-30.1676038653, 36.8069310992))
            Line((-30.1676038653, 36.8069310992), (-27.0769987784, 34.8878260057))
        make_face()
    extrude(amount=F1_DEPTH)


solid = f1.part
